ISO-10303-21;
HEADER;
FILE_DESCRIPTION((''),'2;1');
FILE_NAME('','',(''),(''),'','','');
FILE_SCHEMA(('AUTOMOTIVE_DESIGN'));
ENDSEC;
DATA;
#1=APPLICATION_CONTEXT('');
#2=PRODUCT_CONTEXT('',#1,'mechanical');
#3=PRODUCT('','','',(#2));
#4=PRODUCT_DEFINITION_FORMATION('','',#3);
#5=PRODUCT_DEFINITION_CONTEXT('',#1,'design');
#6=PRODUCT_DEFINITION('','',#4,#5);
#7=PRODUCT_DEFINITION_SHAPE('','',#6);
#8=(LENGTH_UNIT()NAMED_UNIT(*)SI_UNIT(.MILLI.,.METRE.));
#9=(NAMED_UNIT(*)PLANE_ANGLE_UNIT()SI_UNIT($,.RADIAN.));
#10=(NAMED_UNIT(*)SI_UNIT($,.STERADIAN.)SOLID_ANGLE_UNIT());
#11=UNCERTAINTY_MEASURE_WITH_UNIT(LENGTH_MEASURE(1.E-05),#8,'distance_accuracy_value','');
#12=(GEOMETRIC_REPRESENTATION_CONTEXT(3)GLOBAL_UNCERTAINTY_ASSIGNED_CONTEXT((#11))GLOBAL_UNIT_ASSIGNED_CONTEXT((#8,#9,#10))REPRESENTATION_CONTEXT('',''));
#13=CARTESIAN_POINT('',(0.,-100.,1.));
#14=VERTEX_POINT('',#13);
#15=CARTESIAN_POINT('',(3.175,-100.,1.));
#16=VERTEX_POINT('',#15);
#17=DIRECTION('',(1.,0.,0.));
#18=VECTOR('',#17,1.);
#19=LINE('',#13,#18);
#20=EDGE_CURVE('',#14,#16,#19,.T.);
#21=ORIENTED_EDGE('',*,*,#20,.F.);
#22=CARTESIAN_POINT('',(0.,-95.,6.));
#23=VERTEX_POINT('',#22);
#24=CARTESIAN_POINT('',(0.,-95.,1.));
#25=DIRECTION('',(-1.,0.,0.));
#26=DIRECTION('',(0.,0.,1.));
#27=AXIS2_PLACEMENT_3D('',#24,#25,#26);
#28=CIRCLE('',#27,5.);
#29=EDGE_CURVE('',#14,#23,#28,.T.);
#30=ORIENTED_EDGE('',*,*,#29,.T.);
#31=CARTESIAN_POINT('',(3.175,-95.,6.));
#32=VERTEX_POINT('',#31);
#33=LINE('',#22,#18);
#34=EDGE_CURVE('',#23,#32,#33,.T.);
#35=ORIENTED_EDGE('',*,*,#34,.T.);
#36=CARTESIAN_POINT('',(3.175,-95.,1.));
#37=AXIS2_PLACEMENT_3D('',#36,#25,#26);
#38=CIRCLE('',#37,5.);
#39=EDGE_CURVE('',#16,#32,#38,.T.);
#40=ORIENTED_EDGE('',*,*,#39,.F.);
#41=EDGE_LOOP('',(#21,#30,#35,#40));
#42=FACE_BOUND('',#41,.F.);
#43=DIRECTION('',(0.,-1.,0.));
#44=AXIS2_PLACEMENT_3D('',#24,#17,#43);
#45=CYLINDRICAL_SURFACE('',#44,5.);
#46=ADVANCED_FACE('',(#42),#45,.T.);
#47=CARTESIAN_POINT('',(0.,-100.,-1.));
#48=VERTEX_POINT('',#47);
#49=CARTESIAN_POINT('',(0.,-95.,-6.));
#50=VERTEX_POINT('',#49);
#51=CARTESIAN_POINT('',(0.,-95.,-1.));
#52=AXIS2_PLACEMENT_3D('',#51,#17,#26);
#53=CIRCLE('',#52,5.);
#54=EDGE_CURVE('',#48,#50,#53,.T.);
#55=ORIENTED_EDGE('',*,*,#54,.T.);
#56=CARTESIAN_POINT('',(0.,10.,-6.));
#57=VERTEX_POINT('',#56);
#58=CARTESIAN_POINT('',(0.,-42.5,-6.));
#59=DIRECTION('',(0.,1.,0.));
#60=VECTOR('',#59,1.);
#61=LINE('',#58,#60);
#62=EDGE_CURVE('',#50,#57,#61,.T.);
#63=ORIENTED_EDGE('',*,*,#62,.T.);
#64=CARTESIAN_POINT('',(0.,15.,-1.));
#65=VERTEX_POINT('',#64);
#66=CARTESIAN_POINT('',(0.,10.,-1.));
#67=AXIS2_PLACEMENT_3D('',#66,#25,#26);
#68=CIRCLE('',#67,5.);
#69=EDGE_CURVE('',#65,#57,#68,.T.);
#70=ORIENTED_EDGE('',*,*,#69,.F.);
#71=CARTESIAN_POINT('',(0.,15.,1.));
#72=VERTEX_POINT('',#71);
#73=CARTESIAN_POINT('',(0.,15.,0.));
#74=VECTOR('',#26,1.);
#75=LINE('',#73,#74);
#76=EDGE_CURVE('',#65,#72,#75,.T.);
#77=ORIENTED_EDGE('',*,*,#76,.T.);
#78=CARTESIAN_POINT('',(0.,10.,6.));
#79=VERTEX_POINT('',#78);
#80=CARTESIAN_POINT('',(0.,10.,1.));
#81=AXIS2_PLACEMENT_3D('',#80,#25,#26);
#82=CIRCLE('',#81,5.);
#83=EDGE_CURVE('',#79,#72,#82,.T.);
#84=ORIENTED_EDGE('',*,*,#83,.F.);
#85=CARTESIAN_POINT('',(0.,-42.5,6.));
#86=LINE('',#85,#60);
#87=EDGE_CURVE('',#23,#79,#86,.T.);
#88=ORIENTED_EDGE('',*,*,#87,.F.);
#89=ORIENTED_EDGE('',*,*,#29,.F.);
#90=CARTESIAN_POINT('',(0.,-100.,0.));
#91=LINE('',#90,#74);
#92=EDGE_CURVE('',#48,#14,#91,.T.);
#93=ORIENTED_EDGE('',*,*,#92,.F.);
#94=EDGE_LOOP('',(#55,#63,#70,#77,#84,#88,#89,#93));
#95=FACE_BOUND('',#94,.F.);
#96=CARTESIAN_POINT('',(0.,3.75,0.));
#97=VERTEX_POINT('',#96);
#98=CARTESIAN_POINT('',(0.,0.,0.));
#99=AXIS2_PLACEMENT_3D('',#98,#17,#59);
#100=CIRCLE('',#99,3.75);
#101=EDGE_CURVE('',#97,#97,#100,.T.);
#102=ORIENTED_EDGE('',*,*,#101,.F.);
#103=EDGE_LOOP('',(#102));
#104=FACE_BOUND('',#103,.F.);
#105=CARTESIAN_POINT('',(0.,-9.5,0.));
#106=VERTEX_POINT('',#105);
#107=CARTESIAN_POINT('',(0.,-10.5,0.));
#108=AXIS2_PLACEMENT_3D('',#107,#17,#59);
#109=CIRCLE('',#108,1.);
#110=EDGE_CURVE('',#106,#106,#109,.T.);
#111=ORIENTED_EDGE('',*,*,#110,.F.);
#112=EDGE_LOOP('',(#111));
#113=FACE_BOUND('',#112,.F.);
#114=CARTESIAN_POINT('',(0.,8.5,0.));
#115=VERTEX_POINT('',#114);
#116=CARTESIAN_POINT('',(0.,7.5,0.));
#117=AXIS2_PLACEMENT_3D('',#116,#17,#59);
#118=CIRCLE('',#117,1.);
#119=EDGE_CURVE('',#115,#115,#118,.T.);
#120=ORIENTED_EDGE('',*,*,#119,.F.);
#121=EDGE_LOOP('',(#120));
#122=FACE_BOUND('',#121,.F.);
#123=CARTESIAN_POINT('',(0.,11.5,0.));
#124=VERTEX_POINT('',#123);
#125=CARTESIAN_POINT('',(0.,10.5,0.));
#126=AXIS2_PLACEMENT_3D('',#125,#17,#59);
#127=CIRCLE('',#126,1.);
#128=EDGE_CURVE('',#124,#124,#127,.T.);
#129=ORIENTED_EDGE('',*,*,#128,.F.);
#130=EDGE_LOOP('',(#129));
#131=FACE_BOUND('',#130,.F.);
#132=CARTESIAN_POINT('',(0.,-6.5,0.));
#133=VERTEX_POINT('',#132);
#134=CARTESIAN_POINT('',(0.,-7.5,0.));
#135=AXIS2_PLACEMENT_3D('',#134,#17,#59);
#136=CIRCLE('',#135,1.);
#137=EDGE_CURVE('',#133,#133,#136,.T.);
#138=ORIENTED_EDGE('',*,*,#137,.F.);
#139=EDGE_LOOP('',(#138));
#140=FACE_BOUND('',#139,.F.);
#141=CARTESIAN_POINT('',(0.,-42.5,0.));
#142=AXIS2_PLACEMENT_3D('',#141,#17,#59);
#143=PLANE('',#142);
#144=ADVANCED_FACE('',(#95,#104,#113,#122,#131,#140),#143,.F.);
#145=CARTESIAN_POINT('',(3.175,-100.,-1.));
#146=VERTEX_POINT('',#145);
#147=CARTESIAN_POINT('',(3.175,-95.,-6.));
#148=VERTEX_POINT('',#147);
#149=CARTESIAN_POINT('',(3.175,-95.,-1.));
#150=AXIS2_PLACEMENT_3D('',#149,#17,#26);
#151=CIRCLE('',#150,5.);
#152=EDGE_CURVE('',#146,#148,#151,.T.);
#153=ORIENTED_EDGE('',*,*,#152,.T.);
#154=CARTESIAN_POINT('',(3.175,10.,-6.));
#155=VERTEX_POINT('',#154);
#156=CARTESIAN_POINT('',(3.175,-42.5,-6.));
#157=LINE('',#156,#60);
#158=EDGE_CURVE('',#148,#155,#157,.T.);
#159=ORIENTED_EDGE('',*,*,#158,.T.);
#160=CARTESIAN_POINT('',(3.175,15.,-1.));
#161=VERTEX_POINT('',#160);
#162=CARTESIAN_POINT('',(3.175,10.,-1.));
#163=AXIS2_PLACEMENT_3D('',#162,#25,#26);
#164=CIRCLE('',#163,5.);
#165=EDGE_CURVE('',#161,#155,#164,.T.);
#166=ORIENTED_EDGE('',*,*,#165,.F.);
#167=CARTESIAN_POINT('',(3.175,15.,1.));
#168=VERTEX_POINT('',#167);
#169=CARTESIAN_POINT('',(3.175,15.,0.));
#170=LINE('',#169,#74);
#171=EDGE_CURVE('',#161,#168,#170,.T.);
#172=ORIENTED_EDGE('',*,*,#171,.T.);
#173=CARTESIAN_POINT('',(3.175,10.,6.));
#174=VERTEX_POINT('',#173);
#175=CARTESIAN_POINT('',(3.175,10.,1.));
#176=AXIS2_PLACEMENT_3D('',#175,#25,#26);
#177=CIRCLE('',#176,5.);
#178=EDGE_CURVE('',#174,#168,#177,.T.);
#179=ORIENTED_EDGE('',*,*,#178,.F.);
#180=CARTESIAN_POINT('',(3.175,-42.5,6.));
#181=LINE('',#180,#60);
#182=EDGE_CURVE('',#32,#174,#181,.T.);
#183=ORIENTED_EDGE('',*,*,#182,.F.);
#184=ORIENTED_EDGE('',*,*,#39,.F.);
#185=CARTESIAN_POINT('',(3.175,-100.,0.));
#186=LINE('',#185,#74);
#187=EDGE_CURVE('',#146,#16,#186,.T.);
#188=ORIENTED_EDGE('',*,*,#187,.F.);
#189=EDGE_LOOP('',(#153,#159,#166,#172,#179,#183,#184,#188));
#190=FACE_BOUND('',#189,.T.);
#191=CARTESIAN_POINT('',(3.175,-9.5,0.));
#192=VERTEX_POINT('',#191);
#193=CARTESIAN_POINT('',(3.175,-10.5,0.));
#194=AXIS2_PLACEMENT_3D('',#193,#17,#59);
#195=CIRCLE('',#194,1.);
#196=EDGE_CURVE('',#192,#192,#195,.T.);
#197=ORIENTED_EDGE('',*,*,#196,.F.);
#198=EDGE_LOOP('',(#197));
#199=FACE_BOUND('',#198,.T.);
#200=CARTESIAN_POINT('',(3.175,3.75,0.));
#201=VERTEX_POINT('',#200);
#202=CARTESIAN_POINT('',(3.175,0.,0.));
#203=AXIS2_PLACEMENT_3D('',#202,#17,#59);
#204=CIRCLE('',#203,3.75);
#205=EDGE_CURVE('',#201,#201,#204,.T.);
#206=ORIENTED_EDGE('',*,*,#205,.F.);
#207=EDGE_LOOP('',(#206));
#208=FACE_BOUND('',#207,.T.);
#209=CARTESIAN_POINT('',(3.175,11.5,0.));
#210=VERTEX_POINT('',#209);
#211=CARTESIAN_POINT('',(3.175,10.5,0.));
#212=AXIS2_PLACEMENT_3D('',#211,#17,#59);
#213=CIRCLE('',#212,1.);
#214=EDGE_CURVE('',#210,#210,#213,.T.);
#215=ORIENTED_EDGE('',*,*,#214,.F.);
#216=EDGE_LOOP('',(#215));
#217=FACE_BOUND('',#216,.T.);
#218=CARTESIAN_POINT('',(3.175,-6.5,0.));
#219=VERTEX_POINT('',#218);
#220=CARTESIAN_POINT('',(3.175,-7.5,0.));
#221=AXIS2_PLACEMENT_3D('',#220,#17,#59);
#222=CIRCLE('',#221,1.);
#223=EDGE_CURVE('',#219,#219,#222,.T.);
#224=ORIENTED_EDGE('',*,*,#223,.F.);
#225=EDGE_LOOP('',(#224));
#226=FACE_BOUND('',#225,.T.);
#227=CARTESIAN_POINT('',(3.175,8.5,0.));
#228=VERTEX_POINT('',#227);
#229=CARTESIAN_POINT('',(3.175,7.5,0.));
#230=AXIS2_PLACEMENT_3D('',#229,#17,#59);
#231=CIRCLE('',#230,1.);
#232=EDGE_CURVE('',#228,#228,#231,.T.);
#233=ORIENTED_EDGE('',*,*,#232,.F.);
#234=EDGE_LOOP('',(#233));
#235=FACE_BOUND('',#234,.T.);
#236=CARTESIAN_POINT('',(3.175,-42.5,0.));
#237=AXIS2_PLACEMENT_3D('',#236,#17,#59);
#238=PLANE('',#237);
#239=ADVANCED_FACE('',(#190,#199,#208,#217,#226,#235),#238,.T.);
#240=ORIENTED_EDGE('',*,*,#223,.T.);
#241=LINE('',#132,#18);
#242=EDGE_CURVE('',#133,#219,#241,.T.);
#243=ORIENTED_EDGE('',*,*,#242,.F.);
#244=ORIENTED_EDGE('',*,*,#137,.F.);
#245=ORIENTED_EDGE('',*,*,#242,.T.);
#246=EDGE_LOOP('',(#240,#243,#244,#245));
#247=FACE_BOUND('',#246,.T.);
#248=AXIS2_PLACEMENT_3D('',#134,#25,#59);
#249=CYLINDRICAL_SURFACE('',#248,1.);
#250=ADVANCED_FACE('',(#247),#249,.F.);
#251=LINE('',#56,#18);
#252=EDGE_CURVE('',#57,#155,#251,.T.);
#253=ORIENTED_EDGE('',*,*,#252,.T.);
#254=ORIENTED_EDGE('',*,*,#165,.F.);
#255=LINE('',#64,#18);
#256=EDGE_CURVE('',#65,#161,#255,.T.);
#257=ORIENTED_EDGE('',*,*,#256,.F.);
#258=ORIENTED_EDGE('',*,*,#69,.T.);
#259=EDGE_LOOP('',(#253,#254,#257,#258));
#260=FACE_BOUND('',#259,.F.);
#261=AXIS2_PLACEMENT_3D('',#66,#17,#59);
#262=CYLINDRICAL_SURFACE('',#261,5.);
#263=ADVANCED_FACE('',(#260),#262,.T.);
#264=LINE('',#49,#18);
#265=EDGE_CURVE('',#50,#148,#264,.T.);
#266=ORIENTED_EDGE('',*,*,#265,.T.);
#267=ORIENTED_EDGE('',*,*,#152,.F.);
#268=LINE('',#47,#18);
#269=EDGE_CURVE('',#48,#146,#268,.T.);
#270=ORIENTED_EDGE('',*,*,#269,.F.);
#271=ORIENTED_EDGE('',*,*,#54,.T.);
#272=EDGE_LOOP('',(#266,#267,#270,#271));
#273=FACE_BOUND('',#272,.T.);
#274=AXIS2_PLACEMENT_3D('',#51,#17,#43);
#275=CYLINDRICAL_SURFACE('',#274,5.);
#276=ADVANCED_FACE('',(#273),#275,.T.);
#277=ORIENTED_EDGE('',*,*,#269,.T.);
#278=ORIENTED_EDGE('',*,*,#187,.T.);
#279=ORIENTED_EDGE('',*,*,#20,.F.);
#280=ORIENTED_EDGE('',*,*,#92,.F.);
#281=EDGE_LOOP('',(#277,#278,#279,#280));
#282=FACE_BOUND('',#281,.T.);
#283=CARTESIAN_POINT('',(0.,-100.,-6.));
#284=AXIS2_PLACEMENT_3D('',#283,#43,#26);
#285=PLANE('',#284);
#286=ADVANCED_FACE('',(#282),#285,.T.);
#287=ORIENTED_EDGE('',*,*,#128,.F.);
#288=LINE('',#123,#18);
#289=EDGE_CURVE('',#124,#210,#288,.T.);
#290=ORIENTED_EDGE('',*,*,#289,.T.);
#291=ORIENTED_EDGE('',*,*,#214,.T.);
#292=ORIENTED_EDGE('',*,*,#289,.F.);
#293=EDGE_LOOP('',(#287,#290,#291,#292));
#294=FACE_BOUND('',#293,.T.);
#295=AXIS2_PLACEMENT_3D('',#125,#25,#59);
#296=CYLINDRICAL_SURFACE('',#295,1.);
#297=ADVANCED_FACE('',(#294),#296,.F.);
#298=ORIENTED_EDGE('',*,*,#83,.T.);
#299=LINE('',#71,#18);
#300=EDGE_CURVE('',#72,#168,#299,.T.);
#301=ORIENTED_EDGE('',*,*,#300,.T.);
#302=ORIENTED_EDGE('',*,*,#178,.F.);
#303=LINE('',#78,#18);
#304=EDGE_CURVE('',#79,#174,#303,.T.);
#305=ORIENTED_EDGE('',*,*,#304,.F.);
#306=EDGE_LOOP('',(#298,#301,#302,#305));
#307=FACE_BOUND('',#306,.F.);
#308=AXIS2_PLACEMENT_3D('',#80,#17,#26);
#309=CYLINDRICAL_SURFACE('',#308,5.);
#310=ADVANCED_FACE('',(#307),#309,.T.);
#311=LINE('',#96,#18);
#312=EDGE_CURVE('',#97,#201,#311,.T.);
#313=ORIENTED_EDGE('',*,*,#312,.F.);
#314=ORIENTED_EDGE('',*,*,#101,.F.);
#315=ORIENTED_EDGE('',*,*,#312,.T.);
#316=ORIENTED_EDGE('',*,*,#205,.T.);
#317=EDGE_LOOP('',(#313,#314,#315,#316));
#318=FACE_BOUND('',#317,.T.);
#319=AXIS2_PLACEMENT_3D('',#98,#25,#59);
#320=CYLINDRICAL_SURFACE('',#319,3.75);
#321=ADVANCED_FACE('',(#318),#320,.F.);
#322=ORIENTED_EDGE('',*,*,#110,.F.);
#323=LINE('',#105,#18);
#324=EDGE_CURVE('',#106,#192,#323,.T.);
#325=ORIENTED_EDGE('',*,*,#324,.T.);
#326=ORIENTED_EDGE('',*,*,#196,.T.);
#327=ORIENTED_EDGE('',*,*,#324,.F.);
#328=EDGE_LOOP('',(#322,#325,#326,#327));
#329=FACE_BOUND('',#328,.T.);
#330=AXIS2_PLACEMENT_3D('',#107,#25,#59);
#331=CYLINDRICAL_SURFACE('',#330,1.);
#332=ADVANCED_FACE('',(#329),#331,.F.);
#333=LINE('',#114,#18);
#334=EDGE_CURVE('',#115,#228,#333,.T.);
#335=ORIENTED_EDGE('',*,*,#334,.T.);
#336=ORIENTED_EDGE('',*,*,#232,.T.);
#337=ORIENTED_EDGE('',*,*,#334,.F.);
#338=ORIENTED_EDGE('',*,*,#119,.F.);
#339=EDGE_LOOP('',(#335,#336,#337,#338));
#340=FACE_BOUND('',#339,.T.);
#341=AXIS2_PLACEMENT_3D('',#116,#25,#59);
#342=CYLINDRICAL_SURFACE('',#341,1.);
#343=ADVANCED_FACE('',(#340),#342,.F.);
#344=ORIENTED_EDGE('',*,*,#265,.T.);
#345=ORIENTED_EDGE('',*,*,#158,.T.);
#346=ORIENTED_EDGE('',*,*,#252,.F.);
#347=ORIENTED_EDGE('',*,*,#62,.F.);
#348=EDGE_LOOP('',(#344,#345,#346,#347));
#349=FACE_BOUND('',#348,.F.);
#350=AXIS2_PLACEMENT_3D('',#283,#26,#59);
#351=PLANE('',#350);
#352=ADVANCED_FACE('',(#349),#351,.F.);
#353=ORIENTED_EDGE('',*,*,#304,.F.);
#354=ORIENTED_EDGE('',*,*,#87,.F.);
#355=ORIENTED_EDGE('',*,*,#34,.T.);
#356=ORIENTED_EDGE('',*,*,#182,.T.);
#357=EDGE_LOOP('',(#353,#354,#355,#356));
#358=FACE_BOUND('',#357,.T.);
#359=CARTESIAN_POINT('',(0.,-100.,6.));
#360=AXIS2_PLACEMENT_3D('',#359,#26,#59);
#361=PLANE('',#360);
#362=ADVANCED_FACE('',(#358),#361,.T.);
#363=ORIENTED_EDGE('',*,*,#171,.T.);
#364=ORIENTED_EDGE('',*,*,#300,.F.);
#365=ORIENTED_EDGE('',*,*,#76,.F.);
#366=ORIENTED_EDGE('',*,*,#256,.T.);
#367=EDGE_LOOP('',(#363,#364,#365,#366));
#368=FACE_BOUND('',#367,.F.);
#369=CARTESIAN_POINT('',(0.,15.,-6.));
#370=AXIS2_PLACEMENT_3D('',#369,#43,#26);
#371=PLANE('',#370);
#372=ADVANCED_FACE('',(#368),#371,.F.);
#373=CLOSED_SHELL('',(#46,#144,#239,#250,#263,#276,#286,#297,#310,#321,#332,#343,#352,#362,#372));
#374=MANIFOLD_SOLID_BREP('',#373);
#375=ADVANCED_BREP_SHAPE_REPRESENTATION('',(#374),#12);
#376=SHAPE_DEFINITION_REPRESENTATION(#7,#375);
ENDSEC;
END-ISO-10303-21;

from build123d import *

# Parameters (mm, degrees)
F0_W     = 115
F0_H     = 12
F0_R     = 1
F0_R_2   = 3.75
F1_DEPTH = 3.175
F2_R     = 5
F3_R     = 5
F4_R     = 5
F5_R     = 5


# Not quite as in the source:
# - a length typed as a fraction of an inch, garbled in the dataset ("3 / 203.2 mm" for 3/8 in), is restored


with BuildPart() as f1:
    # F0 (on Right) → F1 (new body)
    with BuildSketch(Plane.YZ):
        with Locations((-42.5, 0)):
            Rectangle(F0_W, F0_H)
        with Locations((-10.5, 0)):
            Circle(F0_R, mode=Mode.SUBTRACT)
        with Locations((-7.5, 0)):
            Circle(F0_R, mode=Mode.SUBTRACT)
        Circle(F0_R_2, mode=Mode.SUBTRACT)
        with Locations((7.5, 0)):
            Circle(F0_R, mode=Mode.SUBTRACT)
        with Locations((10.5, 0)):
            Circle(F0_R, mode=Mode.SUBTRACT)
    extrude(amount=F1_DEPTH)

    # F2
    f2_edges = [f1.edges().sort_by_distance(p)[0] for p in [
        (1.5875, -100, 6),
    ]]
    fillet(f2_edges, radius=F2_R)

    # F3
    f3_edges = [f1.edges().sort_by_distance(p)[0] for p in [
        (1.5875, -100, -6),
    ]]
    fillet(f3_edges, radius=F3_R)

    # F4
    f4_edges = [f1.edges().sort_by_distance(p)[0] for p in [
        (1.5875, 15, 6),
    ]]
    fillet(f4_edges, radius=F4_R)

    # F5
    f5_edges = [f1.edges().sort_by_distance(p)[0] for p in [
        (1.5875, 15, -6),
    ]]
    fillet(f5_edges, radius=F5_R)


solid = f1.part
